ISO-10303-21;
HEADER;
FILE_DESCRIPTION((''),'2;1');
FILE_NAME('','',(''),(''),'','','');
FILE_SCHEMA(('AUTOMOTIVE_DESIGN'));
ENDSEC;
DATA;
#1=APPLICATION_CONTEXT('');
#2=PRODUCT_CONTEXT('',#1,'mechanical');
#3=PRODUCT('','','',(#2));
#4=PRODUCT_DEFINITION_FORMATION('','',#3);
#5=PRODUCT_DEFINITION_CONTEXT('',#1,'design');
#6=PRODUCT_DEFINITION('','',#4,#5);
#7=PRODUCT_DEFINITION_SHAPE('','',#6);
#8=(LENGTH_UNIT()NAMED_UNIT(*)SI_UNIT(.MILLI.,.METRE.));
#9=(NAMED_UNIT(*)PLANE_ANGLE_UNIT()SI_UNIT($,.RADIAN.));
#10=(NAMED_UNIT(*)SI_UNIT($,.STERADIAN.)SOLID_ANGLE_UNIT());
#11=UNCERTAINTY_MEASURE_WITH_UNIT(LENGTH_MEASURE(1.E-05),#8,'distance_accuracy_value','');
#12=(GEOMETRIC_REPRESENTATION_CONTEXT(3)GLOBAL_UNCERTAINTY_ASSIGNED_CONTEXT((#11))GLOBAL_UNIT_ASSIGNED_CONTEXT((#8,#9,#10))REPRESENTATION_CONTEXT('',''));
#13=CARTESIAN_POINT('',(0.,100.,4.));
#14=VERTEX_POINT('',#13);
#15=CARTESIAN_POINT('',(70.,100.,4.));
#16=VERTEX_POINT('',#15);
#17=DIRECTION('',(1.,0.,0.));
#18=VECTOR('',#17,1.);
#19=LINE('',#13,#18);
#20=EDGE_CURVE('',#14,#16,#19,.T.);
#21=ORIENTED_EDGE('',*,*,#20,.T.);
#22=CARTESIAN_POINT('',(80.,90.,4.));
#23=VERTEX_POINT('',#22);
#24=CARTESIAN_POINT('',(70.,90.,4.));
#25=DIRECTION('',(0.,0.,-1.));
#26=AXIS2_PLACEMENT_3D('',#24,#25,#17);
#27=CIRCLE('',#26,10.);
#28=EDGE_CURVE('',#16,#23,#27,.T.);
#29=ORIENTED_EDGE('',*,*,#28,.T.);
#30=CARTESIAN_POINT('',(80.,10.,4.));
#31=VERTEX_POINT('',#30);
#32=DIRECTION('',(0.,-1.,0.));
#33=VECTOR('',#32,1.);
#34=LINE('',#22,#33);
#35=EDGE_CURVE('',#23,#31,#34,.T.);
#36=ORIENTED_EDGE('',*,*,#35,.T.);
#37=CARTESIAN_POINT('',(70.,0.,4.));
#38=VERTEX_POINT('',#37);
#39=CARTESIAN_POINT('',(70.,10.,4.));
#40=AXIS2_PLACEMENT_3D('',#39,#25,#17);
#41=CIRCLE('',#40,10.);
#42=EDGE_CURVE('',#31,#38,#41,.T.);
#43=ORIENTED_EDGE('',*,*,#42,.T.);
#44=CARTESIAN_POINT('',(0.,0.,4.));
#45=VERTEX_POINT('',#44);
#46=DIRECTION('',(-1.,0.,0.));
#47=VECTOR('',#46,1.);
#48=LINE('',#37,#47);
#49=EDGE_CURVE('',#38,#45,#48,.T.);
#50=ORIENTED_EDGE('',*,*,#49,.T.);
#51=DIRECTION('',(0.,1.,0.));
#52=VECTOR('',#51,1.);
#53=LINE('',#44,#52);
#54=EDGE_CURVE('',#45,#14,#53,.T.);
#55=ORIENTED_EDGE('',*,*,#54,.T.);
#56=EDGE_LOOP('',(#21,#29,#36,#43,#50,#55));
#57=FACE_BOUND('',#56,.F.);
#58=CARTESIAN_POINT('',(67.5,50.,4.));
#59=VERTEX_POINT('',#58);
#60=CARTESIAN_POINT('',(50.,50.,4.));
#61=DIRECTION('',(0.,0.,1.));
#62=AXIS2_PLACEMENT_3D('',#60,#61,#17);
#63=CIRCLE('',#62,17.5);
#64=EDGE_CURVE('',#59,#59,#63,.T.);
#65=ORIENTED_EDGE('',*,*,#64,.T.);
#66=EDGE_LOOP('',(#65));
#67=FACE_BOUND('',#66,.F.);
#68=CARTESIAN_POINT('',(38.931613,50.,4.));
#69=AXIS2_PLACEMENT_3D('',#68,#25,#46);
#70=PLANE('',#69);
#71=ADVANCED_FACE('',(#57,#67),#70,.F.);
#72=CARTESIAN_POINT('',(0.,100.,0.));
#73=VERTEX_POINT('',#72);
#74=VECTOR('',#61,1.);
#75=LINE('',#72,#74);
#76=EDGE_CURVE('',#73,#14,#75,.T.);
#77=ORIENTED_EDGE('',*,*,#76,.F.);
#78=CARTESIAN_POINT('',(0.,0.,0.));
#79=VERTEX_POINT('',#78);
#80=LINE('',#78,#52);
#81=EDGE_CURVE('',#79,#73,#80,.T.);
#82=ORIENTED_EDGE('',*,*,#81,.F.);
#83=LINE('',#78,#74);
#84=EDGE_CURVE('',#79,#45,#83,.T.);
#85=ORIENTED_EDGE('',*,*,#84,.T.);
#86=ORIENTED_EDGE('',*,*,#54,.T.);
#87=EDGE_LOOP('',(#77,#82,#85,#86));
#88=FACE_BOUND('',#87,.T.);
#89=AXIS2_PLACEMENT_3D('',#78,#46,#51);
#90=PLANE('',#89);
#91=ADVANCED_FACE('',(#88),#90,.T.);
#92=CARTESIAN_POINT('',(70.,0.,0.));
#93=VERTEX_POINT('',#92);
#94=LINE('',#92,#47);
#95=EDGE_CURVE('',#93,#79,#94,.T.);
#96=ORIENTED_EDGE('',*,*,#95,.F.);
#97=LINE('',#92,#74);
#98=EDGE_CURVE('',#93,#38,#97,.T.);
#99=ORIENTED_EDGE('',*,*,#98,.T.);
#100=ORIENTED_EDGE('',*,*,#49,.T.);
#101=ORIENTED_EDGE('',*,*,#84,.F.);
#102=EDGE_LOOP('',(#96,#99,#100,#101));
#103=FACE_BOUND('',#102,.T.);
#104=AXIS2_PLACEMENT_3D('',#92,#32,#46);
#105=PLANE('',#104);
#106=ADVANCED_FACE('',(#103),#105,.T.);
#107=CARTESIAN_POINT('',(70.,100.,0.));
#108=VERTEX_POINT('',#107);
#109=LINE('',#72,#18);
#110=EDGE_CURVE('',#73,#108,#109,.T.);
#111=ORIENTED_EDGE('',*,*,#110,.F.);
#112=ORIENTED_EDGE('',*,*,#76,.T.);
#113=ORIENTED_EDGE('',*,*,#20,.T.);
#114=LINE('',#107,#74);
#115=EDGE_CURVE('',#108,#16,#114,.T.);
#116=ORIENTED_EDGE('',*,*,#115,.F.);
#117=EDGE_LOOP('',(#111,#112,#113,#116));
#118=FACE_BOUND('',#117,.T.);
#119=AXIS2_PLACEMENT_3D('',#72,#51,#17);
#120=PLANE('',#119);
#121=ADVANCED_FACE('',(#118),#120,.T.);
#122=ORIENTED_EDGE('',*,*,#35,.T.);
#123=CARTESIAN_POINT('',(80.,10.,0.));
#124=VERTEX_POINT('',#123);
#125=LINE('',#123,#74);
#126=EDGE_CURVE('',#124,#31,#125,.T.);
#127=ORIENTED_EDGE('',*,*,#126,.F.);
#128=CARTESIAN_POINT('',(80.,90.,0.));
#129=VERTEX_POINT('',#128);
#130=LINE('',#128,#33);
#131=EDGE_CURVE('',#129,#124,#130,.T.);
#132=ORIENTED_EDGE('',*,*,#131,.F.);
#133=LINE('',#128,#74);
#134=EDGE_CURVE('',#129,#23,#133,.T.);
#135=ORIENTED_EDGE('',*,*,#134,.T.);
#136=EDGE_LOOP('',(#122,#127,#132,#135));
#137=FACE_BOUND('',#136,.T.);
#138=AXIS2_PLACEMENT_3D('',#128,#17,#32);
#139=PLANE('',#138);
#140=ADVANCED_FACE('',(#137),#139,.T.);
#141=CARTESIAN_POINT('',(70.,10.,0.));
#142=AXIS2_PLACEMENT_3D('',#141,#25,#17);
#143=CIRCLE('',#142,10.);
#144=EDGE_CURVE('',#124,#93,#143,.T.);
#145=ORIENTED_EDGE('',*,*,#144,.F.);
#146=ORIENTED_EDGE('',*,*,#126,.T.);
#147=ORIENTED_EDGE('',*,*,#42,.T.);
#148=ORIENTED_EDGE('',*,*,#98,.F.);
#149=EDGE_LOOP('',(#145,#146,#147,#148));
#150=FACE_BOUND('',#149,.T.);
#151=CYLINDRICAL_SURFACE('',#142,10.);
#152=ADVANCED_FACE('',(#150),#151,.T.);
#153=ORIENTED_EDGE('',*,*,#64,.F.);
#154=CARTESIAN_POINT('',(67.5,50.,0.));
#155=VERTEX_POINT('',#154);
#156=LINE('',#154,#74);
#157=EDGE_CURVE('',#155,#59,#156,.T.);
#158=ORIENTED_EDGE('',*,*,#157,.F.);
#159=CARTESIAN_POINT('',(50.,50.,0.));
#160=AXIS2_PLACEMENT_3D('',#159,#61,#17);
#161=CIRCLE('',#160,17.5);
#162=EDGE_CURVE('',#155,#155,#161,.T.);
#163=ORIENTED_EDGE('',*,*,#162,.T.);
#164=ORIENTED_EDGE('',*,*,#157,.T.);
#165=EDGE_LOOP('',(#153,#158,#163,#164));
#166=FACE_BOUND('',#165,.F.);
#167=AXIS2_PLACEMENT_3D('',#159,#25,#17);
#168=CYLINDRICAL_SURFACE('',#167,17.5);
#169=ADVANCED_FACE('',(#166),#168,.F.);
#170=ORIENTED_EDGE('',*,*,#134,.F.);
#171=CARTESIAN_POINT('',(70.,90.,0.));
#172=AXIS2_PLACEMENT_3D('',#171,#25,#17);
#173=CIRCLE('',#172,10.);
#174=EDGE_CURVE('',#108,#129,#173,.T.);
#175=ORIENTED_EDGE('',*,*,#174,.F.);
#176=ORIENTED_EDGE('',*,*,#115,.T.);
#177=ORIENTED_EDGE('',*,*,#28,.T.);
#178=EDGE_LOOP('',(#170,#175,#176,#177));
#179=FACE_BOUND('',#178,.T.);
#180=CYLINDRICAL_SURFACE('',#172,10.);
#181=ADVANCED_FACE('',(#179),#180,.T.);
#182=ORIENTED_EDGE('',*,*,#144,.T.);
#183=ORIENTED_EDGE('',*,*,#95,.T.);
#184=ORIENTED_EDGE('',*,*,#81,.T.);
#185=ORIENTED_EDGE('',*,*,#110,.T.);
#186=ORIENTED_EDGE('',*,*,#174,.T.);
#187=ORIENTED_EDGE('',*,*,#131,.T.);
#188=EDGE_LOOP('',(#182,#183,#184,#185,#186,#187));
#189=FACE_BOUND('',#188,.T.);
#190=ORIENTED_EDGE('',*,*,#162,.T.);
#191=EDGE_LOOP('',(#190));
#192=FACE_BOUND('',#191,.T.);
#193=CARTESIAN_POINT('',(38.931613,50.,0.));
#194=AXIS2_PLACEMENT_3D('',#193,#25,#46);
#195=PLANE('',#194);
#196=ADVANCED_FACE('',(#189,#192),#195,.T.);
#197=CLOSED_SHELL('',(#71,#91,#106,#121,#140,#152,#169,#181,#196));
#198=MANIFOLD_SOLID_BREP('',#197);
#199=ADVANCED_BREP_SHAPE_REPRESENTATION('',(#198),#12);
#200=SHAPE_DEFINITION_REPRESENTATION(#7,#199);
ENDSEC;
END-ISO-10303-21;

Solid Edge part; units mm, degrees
sketch "Sketch1" plane through (0, 0, 0) normal (0, 0, 1) x (1, 0, 0)
  arc A0 (70, 100) -> (80, 90) centre (70, 90) cw
  line L0 (80, 90) -> (80, 10)
  arc A1 (80, 10) -> (70, 0) centre (70, 10) cw
  line L1 (70, 0) -> (0, 0)
  line L2 (0, 0) -> (0, 100)
  line L3 (0, 100) -> (70, 100)
  circle A2 centre (50, 50) radius 17.5
extrude "Protrusion1" add sketch "Sketch1" along normal blind 4
properties material "Acrílico, alto impacto"
